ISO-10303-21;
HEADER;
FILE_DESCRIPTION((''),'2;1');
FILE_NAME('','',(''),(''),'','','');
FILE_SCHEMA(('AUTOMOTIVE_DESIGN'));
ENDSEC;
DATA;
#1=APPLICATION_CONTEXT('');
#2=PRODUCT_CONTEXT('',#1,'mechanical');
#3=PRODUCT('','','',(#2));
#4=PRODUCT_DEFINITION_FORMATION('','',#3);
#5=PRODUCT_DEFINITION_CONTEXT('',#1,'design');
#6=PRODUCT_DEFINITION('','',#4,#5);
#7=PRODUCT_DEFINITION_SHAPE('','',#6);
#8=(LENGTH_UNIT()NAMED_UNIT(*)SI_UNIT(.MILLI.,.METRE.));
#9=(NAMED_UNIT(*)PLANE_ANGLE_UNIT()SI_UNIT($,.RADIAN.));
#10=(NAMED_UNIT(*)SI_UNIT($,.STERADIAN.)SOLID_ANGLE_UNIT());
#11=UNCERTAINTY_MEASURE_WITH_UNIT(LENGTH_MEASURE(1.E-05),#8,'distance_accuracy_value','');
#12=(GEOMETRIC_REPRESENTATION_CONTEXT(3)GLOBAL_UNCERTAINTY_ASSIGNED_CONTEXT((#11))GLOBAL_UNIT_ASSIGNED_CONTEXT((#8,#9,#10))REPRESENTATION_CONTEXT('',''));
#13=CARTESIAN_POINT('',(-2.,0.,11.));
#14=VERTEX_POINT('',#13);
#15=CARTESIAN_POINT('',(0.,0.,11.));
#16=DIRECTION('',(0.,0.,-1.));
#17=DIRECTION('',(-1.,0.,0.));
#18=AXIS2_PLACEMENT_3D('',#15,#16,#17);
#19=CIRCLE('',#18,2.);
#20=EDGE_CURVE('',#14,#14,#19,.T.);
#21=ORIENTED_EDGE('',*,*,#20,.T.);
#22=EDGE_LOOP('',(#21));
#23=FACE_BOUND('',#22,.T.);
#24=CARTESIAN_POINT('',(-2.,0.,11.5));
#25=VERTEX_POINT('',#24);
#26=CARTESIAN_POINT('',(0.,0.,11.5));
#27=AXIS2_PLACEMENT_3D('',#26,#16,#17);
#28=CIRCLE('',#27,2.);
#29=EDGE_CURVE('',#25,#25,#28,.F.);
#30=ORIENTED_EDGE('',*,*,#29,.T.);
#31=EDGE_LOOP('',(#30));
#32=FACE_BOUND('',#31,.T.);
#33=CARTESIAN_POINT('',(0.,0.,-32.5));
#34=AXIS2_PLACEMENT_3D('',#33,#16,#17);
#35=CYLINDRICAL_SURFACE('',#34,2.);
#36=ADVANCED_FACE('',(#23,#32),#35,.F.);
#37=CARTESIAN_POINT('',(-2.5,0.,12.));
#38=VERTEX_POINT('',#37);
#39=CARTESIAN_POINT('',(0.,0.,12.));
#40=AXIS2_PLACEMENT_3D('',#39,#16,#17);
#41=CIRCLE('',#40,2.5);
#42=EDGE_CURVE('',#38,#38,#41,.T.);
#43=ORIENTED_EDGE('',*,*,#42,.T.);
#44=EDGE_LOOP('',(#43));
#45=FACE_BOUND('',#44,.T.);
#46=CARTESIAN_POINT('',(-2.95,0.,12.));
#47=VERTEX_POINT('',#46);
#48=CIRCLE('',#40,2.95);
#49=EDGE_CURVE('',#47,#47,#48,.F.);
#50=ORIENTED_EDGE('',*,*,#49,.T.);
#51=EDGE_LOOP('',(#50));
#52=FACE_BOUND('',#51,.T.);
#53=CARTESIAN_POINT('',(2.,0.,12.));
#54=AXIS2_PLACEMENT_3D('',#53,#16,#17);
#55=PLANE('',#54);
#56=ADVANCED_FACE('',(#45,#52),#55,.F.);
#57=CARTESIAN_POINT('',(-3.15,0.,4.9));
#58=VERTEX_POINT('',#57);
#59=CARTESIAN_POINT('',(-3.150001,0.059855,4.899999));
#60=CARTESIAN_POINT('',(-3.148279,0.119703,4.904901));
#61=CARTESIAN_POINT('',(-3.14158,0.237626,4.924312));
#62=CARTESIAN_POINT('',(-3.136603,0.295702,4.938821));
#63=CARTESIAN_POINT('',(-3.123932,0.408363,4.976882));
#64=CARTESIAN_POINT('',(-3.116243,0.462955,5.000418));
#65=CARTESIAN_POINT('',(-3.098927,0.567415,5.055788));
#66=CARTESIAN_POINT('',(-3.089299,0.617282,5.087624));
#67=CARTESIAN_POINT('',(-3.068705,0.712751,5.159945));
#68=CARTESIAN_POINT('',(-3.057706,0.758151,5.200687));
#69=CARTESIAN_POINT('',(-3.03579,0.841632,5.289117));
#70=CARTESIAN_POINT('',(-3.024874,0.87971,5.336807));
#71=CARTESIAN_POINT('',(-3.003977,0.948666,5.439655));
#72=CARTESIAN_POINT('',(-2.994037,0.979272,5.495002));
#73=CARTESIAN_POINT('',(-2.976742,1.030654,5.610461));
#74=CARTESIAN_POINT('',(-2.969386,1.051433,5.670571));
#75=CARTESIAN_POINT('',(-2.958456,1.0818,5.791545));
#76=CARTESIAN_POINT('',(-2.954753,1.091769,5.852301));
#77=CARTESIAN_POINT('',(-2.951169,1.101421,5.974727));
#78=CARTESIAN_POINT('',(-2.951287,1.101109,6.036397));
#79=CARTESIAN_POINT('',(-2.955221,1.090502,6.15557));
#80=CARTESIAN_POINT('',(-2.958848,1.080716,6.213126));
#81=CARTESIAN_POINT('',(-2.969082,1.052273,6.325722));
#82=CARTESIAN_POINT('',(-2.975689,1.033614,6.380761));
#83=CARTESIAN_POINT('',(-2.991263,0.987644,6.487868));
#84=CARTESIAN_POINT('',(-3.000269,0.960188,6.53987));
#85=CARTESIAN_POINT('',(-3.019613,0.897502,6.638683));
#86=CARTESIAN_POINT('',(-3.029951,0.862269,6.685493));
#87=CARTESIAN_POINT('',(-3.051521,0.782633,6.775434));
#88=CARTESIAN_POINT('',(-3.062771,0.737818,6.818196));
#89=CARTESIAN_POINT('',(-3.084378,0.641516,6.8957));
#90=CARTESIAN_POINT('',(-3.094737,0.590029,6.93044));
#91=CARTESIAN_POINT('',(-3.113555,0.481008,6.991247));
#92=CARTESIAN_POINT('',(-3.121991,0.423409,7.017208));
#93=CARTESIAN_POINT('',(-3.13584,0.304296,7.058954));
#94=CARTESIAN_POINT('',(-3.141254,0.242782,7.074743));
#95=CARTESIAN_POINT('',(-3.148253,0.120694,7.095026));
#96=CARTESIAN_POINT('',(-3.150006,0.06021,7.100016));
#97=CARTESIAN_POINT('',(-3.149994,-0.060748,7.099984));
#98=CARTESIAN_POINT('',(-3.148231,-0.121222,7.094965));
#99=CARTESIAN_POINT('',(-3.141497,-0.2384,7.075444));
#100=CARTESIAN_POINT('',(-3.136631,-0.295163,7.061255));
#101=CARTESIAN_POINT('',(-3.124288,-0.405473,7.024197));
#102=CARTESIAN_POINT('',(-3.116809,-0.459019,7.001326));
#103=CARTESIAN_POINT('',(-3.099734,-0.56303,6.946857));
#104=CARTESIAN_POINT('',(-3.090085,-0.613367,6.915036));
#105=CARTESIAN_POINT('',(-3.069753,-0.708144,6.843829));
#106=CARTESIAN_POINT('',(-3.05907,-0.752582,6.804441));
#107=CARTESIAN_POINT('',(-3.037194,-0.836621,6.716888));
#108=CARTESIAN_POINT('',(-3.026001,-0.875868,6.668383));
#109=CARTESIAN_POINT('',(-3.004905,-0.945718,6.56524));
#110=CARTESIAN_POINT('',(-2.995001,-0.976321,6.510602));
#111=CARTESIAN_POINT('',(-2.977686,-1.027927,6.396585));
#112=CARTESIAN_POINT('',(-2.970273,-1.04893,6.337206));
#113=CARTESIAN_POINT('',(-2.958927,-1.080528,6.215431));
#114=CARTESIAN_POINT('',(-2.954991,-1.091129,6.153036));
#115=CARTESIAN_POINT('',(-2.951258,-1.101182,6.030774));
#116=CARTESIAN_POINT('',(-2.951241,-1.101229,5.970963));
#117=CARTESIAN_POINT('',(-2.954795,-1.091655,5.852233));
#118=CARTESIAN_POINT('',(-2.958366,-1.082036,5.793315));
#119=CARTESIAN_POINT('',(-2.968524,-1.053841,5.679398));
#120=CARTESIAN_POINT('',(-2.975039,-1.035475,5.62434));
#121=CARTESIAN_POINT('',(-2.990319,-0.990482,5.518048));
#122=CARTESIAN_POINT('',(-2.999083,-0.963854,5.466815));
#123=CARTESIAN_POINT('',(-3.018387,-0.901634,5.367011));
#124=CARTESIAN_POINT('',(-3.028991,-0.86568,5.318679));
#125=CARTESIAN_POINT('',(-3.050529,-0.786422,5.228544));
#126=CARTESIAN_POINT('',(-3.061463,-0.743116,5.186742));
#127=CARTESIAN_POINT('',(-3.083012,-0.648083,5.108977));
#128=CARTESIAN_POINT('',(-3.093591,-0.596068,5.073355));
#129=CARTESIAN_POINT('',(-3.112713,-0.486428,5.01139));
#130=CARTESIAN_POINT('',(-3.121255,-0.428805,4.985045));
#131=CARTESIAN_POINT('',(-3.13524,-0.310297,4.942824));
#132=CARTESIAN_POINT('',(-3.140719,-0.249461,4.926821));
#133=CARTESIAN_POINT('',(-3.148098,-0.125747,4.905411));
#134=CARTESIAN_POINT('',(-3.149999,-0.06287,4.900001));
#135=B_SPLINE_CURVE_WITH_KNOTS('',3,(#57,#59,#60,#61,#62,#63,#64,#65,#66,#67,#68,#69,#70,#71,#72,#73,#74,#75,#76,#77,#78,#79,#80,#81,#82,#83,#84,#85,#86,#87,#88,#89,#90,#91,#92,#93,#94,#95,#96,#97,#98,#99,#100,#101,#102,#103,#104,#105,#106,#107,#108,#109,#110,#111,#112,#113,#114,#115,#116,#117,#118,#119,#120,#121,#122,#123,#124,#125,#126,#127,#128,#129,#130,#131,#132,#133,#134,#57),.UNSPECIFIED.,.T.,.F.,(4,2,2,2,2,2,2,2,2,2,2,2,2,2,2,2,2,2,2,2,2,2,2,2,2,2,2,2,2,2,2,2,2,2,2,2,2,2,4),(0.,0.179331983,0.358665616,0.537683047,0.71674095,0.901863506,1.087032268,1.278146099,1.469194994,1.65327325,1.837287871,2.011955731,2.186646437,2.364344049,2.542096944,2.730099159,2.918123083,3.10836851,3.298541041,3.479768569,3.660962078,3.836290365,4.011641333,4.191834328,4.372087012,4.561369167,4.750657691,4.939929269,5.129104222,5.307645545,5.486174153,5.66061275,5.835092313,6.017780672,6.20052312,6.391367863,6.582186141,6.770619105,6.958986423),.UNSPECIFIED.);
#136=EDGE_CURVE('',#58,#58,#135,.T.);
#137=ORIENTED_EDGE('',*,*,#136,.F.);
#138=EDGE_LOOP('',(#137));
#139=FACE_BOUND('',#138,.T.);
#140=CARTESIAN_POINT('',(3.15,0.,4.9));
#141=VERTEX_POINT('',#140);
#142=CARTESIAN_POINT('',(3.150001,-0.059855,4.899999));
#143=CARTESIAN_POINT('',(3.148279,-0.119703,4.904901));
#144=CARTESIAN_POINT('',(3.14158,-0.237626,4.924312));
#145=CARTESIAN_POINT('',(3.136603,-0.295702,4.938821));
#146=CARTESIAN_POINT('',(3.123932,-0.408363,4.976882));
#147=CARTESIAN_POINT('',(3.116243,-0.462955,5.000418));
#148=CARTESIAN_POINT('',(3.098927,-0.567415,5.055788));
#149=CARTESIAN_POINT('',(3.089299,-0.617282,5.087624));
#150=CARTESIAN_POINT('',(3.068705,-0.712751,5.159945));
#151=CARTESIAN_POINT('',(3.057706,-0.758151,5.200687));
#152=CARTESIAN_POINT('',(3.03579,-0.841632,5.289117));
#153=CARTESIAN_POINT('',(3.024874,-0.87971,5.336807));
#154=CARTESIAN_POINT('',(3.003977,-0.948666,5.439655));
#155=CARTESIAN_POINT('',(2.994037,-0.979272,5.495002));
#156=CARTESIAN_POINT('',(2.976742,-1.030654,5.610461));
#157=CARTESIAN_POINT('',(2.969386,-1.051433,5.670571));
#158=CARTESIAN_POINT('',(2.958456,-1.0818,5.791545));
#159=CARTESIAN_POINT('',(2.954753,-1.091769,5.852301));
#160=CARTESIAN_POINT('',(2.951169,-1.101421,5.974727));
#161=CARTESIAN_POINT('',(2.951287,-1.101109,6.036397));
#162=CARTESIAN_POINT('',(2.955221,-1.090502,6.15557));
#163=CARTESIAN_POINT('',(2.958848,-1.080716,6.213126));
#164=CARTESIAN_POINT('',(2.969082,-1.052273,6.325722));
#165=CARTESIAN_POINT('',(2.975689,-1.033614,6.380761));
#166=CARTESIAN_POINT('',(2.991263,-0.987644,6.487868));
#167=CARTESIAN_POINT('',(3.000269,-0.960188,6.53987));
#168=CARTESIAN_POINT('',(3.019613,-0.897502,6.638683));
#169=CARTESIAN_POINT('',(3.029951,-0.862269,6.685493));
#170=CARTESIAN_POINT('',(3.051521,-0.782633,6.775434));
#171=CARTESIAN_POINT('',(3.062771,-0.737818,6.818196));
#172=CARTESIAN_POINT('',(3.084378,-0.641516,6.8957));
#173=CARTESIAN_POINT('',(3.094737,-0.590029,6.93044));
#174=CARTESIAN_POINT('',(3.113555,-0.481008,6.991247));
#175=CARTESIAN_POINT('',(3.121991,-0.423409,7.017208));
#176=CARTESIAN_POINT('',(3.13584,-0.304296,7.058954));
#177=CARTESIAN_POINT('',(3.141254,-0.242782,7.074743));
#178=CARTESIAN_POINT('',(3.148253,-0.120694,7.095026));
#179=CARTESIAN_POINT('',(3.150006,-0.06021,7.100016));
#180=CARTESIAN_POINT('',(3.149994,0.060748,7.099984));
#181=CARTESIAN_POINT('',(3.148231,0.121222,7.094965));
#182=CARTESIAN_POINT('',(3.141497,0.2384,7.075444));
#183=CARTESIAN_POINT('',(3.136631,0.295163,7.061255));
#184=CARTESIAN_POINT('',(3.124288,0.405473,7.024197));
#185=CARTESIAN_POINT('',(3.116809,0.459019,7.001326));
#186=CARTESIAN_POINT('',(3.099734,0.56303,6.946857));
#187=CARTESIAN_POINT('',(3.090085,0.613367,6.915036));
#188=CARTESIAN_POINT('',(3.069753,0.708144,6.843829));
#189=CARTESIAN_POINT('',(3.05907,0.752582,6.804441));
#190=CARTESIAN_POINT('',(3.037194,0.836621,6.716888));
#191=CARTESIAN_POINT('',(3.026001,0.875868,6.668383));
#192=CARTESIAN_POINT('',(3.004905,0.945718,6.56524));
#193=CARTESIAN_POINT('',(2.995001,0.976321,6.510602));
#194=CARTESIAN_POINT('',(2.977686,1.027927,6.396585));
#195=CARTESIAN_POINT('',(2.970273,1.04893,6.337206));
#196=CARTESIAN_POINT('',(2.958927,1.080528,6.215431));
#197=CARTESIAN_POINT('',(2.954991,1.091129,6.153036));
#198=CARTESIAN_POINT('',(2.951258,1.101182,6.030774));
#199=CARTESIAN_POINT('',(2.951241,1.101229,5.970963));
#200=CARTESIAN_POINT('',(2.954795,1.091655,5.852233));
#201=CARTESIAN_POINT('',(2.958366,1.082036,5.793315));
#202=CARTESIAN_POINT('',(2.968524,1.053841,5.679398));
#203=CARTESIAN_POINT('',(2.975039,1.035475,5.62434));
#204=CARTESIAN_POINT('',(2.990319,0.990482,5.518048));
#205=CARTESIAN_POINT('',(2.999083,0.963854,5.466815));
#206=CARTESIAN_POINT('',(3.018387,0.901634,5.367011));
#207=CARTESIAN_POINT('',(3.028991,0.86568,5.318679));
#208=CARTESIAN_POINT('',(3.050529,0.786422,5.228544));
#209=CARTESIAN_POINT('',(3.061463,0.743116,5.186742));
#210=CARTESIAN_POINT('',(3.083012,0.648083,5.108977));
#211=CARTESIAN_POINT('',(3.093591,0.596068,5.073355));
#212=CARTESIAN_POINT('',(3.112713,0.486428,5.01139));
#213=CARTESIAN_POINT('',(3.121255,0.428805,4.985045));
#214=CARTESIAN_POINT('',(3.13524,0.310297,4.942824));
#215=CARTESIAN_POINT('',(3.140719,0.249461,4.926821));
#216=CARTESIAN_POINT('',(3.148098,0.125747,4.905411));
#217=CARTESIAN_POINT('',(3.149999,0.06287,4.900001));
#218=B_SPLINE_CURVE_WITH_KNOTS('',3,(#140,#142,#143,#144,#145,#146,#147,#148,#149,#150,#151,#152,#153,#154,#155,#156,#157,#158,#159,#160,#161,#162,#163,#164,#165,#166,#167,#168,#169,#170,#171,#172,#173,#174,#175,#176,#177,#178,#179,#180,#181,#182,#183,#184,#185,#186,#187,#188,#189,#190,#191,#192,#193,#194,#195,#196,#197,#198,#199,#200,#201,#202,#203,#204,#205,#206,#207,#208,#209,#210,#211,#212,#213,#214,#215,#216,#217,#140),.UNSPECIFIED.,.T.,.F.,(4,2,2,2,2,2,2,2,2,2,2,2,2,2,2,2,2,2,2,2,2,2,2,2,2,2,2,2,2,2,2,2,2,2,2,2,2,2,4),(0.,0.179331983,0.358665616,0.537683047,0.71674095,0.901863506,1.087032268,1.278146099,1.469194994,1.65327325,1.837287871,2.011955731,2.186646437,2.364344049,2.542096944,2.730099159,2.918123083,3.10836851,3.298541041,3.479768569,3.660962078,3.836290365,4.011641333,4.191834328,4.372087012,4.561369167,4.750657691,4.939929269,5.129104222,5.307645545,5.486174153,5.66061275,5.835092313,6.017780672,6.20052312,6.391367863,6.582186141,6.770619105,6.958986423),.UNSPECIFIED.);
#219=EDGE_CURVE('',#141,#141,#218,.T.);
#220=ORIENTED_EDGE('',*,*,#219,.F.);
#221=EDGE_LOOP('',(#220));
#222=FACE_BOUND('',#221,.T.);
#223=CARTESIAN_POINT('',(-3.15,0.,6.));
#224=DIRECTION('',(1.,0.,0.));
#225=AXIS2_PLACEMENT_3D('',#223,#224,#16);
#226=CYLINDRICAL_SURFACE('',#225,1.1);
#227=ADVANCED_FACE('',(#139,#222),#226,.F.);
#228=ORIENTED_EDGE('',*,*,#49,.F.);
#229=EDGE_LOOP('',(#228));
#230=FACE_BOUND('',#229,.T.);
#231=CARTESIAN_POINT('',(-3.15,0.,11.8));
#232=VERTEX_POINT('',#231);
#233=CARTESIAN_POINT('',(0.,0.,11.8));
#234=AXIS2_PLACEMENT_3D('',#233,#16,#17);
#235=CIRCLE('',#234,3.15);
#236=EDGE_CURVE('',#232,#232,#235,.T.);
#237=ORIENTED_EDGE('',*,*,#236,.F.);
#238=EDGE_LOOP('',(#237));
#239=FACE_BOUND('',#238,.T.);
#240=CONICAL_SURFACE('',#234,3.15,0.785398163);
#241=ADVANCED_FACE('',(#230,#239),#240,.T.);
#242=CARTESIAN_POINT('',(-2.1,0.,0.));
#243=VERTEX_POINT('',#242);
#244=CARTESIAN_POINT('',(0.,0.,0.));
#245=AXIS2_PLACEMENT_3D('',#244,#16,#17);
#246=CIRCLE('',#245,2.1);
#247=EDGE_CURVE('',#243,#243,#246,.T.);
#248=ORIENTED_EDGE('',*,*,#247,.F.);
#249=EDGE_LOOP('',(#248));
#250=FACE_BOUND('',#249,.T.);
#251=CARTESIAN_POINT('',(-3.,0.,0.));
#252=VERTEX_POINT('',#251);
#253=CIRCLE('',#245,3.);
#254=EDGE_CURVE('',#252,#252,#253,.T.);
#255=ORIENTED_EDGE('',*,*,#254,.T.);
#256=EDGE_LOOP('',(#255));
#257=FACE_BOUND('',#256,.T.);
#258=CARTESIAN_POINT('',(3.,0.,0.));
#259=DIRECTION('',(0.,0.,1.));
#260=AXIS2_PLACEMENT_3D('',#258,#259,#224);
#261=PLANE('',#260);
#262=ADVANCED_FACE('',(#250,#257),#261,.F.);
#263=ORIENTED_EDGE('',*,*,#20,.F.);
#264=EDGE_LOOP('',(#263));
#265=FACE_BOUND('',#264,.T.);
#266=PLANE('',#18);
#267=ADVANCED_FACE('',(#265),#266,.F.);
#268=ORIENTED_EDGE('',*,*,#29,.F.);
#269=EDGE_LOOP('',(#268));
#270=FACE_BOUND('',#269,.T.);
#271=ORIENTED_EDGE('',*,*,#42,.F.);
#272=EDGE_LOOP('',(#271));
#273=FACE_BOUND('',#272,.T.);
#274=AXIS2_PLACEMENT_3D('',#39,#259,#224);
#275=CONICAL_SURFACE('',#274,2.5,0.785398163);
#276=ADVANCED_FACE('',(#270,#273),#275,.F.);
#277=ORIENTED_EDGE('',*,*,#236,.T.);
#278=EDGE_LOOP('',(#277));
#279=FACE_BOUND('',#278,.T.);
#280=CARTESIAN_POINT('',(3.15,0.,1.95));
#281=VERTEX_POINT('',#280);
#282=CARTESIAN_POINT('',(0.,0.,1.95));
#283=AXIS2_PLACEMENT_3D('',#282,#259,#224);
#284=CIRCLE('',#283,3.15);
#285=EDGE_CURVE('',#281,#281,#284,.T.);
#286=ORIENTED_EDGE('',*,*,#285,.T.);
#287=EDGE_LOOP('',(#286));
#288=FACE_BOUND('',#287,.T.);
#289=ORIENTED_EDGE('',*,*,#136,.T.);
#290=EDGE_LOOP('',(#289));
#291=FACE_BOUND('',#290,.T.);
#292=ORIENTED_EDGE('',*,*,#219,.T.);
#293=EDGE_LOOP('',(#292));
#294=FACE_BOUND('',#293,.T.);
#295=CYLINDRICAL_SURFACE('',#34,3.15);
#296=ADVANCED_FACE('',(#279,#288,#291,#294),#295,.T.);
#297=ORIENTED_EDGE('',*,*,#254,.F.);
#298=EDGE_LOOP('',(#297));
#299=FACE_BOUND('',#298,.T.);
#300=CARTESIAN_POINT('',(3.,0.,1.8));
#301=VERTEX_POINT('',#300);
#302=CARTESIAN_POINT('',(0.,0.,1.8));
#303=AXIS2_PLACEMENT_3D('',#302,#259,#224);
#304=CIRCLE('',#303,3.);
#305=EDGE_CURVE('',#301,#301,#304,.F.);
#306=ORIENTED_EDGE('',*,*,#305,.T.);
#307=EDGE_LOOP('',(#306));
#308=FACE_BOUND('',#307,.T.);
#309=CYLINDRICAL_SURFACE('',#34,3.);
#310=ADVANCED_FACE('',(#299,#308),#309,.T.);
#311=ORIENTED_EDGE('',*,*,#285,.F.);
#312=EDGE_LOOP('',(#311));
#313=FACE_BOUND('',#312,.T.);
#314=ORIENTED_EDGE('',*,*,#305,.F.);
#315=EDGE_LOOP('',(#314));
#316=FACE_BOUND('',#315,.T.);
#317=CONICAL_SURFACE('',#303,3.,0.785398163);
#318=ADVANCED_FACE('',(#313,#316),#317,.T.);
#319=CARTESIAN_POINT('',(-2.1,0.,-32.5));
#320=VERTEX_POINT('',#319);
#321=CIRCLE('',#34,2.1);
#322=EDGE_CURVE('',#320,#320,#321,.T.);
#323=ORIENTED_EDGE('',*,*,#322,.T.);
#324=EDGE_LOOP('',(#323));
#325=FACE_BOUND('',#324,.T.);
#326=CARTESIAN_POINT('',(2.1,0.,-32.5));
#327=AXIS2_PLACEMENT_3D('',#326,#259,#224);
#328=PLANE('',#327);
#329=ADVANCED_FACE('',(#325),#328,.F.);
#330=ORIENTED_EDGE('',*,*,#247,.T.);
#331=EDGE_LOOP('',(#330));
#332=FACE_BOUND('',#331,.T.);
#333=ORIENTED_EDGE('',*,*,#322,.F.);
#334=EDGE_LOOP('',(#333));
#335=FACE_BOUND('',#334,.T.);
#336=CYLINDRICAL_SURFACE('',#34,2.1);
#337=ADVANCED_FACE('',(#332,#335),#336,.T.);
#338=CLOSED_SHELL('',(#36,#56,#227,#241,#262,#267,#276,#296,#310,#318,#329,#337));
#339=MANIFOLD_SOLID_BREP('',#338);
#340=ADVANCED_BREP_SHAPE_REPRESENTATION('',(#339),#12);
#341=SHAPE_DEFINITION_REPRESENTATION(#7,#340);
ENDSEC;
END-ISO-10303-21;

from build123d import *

# Parameters (mm, degrees)
CUT_EXTRUDE_1_DEPTH      = 33.803886965
CUT_EXTRUDE_1_DEPTH_BACK = 33.803886965
SKETCH_3_R               = 1.1
CHAMFER_1_SIZE           = 0.5
CHAMFER_3_SIZE           = 0.2


with BuildPart() as part:
    # 스케치2 → 회전1 (revolve)
    with BuildSketch(Plane(origin=(0, 0, 0), x_dir=(1, 0, 0), z_dir=(0, 1, 0)), mode=Mode.PRIVATE) as revolve_1_sk:
        Polygon((0, 32.5), (0, -11), (2, -11), (2, -12), (3.15, -12), (3.15, -2), (3, -2), (3, 0), (2.1, 0), (2.1, 32.5), align=None)
    revolve(revolve_1_sk.sketch.rotate(Axis((0, 0, -32.5), (0, 0, 1)), 180), axis=Axis((0, 0, -32.5), (0, 0, 1)))

    # 스케치3 → 컷-돌출1 (cut, two sides: drawn at the far end of the back side and taken through both)
    with BuildSketch(Plane(origin=(0, 0, 0), x_dir=(0, 0, -1), z_dir=(1, 0, 0)).offset(-CUT_EXTRUDE_1_DEPTH_BACK)):
        with Locations((-6, 0)):
            Circle(SKETCH_3_R)
    extrude(amount=CUT_EXTRUDE_1_DEPTH + CUT_EXTRUDE_1_DEPTH_BACK, mode=Mode.SUBTRACT)

    # 모따기1
    chamfer_1_edges = [part.edges().sort_by_distance(p)[0] for p in [
        (2, 0, 12),
    ]]
    chamfer(chamfer_1_edges, length=CHAMFER_1_SIZE)

    # 모따기3
    # the kernel refuses this chamfer: 0.2 mm, written as the material it adds along each edge
    with BuildSketch(Plane(origin=(0, 0, 2), x_dir=(-1, 0, 0), z_dir=(0, 1, 0))) as chamfer_3_piece_1_section:
        Polygon((3 + CHAMFER_3_SIZE, 0), (3, -CHAMFER_3_SIZE), (3, 0), align=None)
    chamfer_3_piece_1 = revolve(axis=Axis((0, 0, 2), (0, 0, 1)), mode=Mode.PRIVATE)
    chamfer_3_piece_1 = chamfer_3_piece_1 & Plane(origin=(0, 0, 1.877341944), x_dir=(-1, 0, 0), z_dir=(0, 0, -1)) * Cylinder(3.15, 13, mode=Mode.PRIVATE)
    add(chamfer_3_piece_1)
    # the kernel refuses this chamfer: 0.2 mm, written as the material it takes off along each edge
    with BuildSketch(Plane(origin=(0, 0, 12), x_dir=(-1, 0, 0), z_dir=(0, 1, 0))) as chamfer_3_2_piece_1:
        Polygon((3.15 - CHAMFER_3_SIZE, 0), (3.15, -CHAMFER_3_SIZE), (3.15, 0), align=None)
    revolve(axis=Axis((0, 0, 12), (0, 0, 1)), mode=Mode.SUBTRACT)


solid = part.part
